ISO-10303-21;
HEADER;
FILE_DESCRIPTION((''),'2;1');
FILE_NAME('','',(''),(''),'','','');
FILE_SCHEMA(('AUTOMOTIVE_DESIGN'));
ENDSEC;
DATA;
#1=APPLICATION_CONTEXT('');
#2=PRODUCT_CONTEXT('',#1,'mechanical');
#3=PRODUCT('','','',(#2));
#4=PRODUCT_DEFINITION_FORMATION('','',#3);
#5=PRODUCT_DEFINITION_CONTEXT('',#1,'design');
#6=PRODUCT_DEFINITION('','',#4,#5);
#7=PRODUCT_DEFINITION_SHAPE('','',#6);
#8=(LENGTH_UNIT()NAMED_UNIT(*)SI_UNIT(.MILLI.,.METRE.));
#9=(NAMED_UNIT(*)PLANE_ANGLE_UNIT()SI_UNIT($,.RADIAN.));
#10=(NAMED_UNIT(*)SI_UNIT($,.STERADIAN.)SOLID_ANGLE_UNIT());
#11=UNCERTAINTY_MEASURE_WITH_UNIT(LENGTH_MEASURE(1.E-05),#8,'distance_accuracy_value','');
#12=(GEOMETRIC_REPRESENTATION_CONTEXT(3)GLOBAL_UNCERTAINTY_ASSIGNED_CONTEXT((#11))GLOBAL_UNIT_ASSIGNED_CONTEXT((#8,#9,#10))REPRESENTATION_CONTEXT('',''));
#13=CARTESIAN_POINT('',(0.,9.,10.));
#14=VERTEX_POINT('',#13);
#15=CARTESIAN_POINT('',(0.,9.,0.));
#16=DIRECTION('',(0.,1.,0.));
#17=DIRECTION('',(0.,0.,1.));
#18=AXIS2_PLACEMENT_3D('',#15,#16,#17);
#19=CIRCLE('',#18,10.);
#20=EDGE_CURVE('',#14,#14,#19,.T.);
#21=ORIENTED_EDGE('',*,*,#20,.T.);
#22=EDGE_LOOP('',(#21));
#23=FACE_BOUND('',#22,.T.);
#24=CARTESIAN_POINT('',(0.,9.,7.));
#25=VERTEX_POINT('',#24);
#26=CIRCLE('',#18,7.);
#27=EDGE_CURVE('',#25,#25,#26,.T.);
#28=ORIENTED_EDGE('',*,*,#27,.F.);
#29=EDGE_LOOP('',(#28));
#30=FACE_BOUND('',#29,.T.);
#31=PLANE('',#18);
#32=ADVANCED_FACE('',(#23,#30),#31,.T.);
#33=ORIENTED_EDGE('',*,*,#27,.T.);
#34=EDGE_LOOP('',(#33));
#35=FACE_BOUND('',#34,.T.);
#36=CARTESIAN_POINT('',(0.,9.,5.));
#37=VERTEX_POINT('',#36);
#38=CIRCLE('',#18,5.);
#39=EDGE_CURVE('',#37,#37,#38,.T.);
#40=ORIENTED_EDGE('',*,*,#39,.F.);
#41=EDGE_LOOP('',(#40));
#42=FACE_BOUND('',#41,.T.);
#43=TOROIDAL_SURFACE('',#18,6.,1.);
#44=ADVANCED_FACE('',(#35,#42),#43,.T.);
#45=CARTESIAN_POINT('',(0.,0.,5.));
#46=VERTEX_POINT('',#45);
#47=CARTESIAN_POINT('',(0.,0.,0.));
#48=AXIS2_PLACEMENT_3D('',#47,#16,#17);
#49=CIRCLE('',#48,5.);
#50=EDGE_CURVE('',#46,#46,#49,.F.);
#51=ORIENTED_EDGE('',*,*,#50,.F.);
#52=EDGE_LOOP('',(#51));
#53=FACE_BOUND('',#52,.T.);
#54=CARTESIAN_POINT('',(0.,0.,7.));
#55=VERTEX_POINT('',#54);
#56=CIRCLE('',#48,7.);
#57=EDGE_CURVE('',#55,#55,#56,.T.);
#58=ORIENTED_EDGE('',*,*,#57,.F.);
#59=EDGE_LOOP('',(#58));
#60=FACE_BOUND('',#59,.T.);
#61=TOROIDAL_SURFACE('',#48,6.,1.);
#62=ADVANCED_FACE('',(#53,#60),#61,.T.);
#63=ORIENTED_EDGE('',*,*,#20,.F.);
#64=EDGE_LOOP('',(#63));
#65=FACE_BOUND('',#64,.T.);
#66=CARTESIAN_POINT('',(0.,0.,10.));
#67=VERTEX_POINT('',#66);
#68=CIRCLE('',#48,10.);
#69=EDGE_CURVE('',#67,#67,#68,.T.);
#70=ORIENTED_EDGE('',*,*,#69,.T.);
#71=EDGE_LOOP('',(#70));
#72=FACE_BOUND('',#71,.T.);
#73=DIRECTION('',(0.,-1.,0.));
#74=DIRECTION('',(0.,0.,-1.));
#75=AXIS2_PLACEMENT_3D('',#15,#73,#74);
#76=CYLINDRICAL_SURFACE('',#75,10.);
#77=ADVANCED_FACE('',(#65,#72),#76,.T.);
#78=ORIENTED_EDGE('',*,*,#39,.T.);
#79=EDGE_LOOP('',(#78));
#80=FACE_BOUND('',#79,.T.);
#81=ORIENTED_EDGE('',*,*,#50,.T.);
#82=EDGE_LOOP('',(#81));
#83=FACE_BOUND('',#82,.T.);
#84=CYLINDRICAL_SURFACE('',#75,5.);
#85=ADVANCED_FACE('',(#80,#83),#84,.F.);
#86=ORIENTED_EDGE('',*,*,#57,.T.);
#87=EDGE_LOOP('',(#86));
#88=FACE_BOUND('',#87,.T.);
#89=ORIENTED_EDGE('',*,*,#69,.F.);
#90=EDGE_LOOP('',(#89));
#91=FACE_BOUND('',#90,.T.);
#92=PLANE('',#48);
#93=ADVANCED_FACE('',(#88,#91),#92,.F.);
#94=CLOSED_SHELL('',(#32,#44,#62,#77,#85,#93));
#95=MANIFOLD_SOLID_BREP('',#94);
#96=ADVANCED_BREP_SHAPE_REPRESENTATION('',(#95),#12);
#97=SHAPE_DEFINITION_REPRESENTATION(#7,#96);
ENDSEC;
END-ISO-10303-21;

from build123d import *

# Parameters (mm, degrees)
PROFILE_SKETCH_R              = 10
PROFILE_SKETCH_R_2            = 5
CYLINDER_EXTRUDE_DEPTH        = 9
LIP_RING_SKETCH_R             = 7
LIP_RING_SKETCH_R_2           = 5
BOTTOM_LIP_RING_EXTRUDE_DEPTH = 1
BOTTOM_RING_FILLET_R          = 1
TOP_START                     = -10
SKETCH2_2_R                   = 7
SKETCH2_2_R_2                 = 5
TOP_LIP_RING_EXTRUDE_DEPTH    = 1
TOP_RING_FILLET_R             = 1


with BuildPart() as part:
    # Profile Sketch → Cylinder Extrude (new body)
    with BuildSketch(Plane(origin=(0, 0, 0), x_dir=(1, 0, 0), z_dir=(0, 1, 0))):
        with Locations(Location((0, 0, 0), (0, 0, 270))):
            Circle(PROFILE_SKETCH_R)
        with Locations(Location((0, 0, 0), (0, 0, 270))):
            Circle(PROFILE_SKETCH_R_2, mode=Mode.SUBTRACT)
    extrude(amount=CYLINDER_EXTRUDE_DEPTH)

    # Lip Ring Sketch → Bottom Lip Ring Extrude (add)
    with BuildSketch(Plane(origin=(0, 9, 0), x_dir=(1, 0, 0), z_dir=(0, 1, 0))):
        with Locations(Location((0, 0, 0), (0, 0, 270))):
            Circle(LIP_RING_SKETCH_R)
        with Locations(Location((0, 0, 0), (0, 0, 270))):
            Circle(LIP_RING_SKETCH_R_2, mode=Mode.SUBTRACT)
    extrude(amount=BOTTOM_LIP_RING_EXTRUDE_DEPTH)

    # Bottom Ring Fillet
    bottom_ring_fillet_edges = [part.edges().sort_by_distance(p)[0] for p in [
        (0, 10, -7),
        (0, 10, -5),
    ]]
    fillet(bottom_ring_fillet_edges, radius=BOTTOM_RING_FILLET_R - 0.0001)  # a hair under: the kernel refuses the full size

    # Sketch2<2> → Top Lip Ring Extrude (add)
    with BuildSketch(Plane(origin=(0, 9, 0), x_dir=(1, 0, 0), z_dir=(0, 1, 0)).offset(TOP_START)):
        with Locations(Location((0, 0, 0), (0, 0, 270))):
            Circle(SKETCH2_2_R)
        with Locations(Location((0, 0, 0), (0, 0, 270))):
            Circle(SKETCH2_2_R_2, mode=Mode.SUBTRACT)
    extrude(amount=TOP_LIP_RING_EXTRUDE_DEPTH)

    # Top Ring Fillet
    top_ring_fillet_edges = [part.edges().sort_by_distance(p)[0] for p in [
        (0, -1, -7),
        (0, -1, -5),
    ]]
    fillet(top_ring_fillet_edges, radius=TOP_RING_FILLET_R - 0.0001)  # a hair under: the kernel refuses the full size


solid = part.part
